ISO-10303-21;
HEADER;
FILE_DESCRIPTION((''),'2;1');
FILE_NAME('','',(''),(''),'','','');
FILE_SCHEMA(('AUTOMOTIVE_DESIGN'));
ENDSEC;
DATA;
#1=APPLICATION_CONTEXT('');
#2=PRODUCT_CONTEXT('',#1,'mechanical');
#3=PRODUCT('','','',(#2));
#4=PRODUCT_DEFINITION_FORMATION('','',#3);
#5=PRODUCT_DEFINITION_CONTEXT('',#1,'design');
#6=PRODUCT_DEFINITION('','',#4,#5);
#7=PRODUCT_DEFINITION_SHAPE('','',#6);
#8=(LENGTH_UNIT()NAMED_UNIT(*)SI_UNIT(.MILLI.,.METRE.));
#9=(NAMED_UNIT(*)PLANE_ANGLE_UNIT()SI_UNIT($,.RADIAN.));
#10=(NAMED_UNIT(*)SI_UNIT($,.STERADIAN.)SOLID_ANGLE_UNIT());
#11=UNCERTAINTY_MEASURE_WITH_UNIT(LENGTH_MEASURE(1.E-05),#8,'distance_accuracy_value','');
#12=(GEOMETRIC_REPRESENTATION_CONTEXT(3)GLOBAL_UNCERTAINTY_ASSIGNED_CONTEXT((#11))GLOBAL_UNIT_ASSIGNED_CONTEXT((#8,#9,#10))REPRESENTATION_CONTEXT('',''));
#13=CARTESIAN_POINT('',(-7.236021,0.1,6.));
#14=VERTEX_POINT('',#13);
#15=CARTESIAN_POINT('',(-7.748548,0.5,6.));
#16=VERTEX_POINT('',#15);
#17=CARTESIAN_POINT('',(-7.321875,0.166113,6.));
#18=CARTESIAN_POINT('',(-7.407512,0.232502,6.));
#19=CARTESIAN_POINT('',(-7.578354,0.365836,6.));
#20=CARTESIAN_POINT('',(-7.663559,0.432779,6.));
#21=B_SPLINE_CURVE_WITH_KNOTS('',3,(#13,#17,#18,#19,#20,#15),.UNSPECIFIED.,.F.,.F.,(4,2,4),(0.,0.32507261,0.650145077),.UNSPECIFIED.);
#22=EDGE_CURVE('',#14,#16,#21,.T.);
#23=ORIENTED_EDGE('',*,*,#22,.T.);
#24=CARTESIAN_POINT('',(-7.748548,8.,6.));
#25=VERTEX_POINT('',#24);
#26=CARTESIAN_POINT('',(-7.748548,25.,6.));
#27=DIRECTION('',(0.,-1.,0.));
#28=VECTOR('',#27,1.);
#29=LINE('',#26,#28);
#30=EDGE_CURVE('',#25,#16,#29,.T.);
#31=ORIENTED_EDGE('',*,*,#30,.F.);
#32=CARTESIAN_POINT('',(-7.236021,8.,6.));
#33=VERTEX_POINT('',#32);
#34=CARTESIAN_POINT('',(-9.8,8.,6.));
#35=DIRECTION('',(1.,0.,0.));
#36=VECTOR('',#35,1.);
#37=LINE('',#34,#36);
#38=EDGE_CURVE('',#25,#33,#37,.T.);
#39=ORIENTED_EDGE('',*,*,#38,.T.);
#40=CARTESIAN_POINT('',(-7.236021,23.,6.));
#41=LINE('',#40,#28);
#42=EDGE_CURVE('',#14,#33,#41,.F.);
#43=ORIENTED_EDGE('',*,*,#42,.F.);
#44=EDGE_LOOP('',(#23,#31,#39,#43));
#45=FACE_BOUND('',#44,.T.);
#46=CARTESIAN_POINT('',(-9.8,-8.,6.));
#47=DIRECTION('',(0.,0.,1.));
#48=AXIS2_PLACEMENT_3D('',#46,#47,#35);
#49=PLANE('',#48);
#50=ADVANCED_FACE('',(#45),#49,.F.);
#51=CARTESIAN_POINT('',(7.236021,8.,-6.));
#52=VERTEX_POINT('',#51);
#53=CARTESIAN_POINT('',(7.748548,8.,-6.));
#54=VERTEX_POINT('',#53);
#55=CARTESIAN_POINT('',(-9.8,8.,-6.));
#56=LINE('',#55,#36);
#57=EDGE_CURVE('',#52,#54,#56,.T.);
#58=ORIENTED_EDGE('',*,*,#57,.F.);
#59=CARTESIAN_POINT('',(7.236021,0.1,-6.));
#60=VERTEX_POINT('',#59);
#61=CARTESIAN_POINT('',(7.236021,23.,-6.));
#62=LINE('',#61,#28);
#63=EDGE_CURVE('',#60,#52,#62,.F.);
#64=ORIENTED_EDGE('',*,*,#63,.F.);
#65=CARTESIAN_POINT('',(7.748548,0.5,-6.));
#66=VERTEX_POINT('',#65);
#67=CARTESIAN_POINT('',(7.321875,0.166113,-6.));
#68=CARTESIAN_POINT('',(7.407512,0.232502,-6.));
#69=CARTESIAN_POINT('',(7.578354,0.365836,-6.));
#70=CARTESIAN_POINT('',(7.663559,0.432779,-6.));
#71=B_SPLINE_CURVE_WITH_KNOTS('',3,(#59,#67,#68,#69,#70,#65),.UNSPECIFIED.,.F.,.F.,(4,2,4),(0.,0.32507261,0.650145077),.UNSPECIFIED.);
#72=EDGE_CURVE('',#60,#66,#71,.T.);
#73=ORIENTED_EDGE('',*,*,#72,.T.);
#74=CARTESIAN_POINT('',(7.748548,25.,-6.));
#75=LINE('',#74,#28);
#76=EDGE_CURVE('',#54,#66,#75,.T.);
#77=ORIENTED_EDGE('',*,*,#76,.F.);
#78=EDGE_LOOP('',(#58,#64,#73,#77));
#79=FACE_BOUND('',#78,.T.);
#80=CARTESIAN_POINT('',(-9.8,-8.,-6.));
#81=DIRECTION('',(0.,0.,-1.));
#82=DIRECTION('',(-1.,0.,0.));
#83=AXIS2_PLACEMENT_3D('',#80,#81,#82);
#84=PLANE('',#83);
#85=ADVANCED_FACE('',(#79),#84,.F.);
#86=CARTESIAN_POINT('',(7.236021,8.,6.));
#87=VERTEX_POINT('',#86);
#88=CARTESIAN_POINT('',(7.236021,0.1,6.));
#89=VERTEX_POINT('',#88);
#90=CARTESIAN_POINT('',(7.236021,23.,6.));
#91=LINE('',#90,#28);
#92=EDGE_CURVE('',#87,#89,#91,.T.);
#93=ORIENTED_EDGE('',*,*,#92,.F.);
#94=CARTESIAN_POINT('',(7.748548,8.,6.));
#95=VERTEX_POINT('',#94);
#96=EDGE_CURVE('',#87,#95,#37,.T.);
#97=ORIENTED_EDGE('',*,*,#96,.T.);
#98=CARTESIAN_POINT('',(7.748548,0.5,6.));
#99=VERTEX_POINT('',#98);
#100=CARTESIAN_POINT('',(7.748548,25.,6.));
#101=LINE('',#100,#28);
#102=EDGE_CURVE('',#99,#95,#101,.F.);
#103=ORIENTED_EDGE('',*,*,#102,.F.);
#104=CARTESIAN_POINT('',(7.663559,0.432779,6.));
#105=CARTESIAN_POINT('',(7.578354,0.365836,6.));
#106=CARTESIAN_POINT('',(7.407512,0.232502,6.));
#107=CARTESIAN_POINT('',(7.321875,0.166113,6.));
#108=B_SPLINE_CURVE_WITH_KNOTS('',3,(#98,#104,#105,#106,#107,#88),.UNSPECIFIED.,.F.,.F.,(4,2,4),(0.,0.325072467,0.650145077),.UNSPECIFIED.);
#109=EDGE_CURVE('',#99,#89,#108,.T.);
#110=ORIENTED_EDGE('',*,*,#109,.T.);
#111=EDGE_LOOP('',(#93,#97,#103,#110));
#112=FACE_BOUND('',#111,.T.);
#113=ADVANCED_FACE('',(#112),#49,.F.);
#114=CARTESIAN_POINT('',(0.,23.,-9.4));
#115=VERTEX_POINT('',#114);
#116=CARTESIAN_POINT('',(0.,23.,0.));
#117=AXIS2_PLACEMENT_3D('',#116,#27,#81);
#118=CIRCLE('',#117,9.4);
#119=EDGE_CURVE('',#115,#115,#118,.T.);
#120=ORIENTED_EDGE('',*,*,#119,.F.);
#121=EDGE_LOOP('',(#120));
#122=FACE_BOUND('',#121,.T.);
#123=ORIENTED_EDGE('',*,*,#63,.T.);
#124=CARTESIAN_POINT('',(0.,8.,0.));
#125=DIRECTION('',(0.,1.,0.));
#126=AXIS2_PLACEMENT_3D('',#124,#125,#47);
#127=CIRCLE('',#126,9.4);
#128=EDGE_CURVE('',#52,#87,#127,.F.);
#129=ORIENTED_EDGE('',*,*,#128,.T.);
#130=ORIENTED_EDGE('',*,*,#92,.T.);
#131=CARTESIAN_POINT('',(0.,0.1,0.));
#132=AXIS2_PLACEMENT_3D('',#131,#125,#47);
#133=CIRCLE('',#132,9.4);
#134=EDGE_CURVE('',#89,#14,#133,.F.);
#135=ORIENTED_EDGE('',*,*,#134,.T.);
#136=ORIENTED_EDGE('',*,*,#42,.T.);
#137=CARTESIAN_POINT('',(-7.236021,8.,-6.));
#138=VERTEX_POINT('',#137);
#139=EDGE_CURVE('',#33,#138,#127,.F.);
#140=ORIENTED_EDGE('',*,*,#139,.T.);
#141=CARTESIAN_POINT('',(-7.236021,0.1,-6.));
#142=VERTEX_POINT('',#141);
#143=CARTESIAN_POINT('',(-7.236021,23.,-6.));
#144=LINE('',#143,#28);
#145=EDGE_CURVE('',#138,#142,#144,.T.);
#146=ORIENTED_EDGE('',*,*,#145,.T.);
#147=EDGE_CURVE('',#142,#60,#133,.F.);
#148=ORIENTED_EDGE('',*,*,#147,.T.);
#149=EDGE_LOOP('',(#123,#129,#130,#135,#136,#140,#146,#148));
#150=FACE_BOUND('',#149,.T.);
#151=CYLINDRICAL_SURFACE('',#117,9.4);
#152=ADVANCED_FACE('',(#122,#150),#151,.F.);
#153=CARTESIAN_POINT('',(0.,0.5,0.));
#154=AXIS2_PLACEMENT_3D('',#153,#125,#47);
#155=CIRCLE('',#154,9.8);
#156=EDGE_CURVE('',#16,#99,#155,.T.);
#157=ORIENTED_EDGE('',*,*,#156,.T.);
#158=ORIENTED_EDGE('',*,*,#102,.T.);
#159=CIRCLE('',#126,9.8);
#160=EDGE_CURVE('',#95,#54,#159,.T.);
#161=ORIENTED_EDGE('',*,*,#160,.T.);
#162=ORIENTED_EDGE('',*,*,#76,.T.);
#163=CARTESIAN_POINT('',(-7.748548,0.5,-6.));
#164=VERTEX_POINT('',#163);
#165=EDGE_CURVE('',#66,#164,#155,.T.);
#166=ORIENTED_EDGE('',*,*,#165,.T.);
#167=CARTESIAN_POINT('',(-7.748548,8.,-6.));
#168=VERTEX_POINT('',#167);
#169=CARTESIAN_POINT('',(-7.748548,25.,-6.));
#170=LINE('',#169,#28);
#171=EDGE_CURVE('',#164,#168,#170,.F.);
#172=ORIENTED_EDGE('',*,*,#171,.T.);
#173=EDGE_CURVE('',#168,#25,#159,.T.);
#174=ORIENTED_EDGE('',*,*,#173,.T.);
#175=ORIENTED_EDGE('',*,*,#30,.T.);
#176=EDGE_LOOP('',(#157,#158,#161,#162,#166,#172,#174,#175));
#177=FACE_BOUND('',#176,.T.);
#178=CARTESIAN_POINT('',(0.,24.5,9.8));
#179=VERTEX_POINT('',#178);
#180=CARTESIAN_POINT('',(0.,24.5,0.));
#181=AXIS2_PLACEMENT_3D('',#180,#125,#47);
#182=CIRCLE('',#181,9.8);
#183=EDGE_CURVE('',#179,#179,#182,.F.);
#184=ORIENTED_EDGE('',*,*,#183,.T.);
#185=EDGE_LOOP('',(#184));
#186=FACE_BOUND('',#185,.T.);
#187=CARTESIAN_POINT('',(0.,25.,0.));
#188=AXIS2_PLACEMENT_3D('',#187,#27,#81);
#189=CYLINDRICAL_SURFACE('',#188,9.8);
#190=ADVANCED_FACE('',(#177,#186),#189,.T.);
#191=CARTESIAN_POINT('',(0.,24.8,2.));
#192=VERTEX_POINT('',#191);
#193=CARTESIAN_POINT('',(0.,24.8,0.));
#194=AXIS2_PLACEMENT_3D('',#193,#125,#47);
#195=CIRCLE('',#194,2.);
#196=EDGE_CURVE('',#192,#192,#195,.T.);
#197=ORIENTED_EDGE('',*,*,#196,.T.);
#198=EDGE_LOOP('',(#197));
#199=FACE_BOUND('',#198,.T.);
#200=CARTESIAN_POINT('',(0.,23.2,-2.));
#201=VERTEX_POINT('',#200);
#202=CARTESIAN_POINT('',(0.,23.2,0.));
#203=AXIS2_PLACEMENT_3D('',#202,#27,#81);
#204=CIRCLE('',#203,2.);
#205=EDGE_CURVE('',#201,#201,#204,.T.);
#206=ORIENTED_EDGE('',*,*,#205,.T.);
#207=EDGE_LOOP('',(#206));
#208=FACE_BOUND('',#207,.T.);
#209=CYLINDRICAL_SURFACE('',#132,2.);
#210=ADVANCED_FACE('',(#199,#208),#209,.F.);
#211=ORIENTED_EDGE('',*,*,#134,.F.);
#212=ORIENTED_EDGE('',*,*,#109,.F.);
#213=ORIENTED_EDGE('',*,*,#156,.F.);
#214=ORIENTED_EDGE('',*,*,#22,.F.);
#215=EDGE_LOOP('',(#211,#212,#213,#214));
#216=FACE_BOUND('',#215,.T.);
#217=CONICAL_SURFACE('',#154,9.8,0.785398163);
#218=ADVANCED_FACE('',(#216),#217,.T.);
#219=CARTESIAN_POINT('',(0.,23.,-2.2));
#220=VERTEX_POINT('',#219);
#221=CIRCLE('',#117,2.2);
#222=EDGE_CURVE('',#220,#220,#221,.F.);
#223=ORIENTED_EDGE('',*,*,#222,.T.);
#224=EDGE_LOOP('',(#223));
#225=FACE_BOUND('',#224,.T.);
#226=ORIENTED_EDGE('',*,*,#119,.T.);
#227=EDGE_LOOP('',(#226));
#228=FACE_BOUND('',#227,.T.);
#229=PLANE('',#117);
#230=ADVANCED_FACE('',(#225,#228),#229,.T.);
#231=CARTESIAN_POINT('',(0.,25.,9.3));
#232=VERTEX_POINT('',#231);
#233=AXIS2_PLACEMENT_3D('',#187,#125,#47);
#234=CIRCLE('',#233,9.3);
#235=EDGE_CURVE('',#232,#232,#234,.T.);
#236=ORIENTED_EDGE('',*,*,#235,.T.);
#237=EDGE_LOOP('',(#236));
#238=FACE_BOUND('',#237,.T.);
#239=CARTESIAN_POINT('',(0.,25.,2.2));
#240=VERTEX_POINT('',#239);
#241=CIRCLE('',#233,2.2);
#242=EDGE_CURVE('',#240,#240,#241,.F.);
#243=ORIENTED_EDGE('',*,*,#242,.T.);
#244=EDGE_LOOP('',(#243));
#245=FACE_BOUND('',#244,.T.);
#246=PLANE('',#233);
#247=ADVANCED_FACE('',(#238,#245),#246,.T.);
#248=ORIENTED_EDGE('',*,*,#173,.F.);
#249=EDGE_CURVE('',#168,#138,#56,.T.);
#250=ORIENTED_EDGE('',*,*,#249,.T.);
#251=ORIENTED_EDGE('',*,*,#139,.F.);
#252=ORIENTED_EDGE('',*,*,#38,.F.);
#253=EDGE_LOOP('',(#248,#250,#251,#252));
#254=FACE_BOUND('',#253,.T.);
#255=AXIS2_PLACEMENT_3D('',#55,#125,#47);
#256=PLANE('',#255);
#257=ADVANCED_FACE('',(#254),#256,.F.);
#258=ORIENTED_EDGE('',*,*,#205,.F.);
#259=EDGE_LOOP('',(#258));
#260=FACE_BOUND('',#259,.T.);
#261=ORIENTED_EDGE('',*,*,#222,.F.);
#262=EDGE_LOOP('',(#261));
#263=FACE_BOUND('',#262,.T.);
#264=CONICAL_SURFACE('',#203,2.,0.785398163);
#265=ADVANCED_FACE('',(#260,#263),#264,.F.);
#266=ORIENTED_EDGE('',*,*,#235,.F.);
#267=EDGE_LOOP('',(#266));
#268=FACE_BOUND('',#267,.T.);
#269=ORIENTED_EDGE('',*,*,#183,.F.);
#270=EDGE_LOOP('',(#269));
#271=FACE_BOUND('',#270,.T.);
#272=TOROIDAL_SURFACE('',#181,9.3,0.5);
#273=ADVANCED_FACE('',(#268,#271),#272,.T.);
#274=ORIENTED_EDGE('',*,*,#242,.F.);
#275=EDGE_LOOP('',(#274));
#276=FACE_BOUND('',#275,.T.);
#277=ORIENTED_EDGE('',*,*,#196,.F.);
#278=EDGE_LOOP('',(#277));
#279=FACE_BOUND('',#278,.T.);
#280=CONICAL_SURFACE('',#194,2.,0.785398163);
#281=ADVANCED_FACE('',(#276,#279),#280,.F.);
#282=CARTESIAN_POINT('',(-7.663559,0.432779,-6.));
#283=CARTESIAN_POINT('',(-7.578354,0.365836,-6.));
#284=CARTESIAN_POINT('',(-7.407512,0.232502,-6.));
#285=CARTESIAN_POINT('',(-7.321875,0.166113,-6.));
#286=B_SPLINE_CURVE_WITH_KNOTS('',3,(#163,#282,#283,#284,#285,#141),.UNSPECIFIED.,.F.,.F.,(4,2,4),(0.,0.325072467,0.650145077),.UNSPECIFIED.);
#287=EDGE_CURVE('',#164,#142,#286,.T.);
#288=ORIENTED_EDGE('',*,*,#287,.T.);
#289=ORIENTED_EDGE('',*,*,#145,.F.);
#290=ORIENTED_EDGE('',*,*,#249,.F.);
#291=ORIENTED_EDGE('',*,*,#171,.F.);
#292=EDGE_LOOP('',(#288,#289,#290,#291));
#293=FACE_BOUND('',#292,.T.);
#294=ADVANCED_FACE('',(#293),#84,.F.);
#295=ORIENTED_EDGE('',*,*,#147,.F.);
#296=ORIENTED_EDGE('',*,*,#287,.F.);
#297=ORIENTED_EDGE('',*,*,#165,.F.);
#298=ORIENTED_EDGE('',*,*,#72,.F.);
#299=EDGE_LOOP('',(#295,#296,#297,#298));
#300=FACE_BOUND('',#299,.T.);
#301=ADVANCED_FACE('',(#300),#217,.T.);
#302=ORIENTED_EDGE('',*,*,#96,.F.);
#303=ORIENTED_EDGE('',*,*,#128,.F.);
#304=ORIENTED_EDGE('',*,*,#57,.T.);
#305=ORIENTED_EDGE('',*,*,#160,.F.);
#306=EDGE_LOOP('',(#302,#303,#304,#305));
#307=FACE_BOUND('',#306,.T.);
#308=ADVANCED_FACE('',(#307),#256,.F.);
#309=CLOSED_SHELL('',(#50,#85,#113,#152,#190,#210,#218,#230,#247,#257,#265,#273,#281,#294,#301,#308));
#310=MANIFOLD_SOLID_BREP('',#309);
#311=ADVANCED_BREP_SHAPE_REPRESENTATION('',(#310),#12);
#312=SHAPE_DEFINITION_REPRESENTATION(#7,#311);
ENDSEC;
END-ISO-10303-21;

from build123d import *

# Parameters (mm, degrees)
SKETCH_1_R               = 9.8
EXTRUDE_1_DEPTH          = 25
FILLET_1_R               = 0.5
SKETCH_5_R               = 9.4
CUT_EXTRUDE_2_DEPTH      = 23
CUT_EXTRUDE_3_DEPTH      = 29.584611279
CUT_EXTRUDE_3_DEPTH_BACK = 29.584611279
SKETCH_6_W               = 12
SKETCH_6_H               = 16
CHAMFER_4_SIZE           = 0.5
SKETCH_9_R               = 2
CUT_EXTRUDE_4_DEPTH      = 29.497192879
CHAMFER_5_SIZE           = 0.2


with BuildPart() as part:
    # 草图1 → 凸台-拉伸1 (new body)
    with BuildSketch(Plane(origin=(0, 0, 0), x_dir=(1, 0, 0), z_dir=(0, 1, 0))):
        with Locations(Location((0, 0, 0), (0, 0, 270))):
            Circle(SKETCH_1_R)
    extrude(amount=EXTRUDE_1_DEPTH)

    # 圆角1
    fillet_1_edges = [part.edges().sort_by_distance(p)[0] for p in [
        (0, 25, -9.8),
    ]]
    fillet(fillet_1_edges, radius=FILLET_1_R)

    # 草图5 → 切除-拉伸2 (cut)
    with BuildSketch(Plane.XZ):
        with Locations(Location((0, 0, 0), (0, 0, 270))):
            Circle(SKETCH_5_R)
    extrude(amount=-CUT_EXTRUDE_2_DEPTH, mode=Mode.SUBTRACT)

    # 草图6 → 切除-拉伸3 (cut, two sides: drawn at the far end of the back side and taken through both)
    with BuildSketch(Plane(origin=(0, 0, 0), x_dir=(0, 0, -1), z_dir=(1, 0, 0)).offset(-CUT_EXTRUDE_3_DEPTH_BACK)):
        Rectangle(SKETCH_6_W, SKETCH_6_H)
    extrude(amount=CUT_EXTRUDE_3_DEPTH + CUT_EXTRUDE_3_DEPTH_BACK, mode=Mode.SUBTRACT)

    # 倒角4
    # the kernel refuses this chamfer: 0.5 mm, written as the material it takes off along each edge
    with BuildSketch(Plane(origin=(0, 0, 0), x_dir=(0, 0, 1), z_dir=(-1, 0, 0))) as chamfer_4_piece_1:
        Polygon((9.8, CHAMFER_4_SIZE), (9.8 - CHAMFER_4_SIZE, 0), (9.8, 0), align=None)
    revolve(axis=Axis((0, 0, 0), (0, 1, 0)), revolution_arc=59.766699, mode=Mode.SUBTRACT)
    with BuildSketch(Plane(origin=(0, 0, 0), x_dir=(0.8640091314658966, 0, -0.5034761372136191), z_dir=(0.5034761372136191, 0, 0.8640091314658966))) as chamfer_4_piece_2:
        Polygon((9.8, CHAMFER_4_SIZE), (9.8 - CHAMFER_4_SIZE, 0), (9.8, 0), align=None)
    revolve(axis=Axis((0, 0, 0), (0, 1, 0)), revolution_arc=119.539505786, mode=Mode.SUBTRACT)
    with BuildSketch(Plane(origin=(0, 0, 0), x_dir=(-0.8639822947128161, 0, 0.503522188610171), z_dir=(-0.503522188610171, 0, -0.8639822947128161))) as chamfer_4_piece_3:
        Polygon((9.8, CHAMFER_4_SIZE), (9.8 - CHAMFER_4_SIZE, 0), (9.8, 0), align=None)
    revolve(axis=Axis((0, 0, 0), (0, 1, 0)), revolution_arc=59.766699, mode=Mode.SUBTRACT)

    # 草图9 → 切除-拉伸4 (cut, through all)
    with BuildSketch(Plane(origin=(0, 25, 0), x_dir=(1, 0, 0), z_dir=(0, 1, 0))):
        with Locations(Location((0, 0, 0), (0, 0, 270))):
            Circle(SKETCH_9_R)
    extrude(amount=-CUT_EXTRUDE_4_DEPTH, mode=Mode.SUBTRACT)

    # 倒角5
    chamfer_5_edges = [part.edges().sort_by_distance(p)[0] for p in [
        (0, 23, -2),
        (0, 25, -2),
    ]]
    chamfer(chamfer_5_edges, length=CHAMFER_5_SIZE)


solid = part.part
